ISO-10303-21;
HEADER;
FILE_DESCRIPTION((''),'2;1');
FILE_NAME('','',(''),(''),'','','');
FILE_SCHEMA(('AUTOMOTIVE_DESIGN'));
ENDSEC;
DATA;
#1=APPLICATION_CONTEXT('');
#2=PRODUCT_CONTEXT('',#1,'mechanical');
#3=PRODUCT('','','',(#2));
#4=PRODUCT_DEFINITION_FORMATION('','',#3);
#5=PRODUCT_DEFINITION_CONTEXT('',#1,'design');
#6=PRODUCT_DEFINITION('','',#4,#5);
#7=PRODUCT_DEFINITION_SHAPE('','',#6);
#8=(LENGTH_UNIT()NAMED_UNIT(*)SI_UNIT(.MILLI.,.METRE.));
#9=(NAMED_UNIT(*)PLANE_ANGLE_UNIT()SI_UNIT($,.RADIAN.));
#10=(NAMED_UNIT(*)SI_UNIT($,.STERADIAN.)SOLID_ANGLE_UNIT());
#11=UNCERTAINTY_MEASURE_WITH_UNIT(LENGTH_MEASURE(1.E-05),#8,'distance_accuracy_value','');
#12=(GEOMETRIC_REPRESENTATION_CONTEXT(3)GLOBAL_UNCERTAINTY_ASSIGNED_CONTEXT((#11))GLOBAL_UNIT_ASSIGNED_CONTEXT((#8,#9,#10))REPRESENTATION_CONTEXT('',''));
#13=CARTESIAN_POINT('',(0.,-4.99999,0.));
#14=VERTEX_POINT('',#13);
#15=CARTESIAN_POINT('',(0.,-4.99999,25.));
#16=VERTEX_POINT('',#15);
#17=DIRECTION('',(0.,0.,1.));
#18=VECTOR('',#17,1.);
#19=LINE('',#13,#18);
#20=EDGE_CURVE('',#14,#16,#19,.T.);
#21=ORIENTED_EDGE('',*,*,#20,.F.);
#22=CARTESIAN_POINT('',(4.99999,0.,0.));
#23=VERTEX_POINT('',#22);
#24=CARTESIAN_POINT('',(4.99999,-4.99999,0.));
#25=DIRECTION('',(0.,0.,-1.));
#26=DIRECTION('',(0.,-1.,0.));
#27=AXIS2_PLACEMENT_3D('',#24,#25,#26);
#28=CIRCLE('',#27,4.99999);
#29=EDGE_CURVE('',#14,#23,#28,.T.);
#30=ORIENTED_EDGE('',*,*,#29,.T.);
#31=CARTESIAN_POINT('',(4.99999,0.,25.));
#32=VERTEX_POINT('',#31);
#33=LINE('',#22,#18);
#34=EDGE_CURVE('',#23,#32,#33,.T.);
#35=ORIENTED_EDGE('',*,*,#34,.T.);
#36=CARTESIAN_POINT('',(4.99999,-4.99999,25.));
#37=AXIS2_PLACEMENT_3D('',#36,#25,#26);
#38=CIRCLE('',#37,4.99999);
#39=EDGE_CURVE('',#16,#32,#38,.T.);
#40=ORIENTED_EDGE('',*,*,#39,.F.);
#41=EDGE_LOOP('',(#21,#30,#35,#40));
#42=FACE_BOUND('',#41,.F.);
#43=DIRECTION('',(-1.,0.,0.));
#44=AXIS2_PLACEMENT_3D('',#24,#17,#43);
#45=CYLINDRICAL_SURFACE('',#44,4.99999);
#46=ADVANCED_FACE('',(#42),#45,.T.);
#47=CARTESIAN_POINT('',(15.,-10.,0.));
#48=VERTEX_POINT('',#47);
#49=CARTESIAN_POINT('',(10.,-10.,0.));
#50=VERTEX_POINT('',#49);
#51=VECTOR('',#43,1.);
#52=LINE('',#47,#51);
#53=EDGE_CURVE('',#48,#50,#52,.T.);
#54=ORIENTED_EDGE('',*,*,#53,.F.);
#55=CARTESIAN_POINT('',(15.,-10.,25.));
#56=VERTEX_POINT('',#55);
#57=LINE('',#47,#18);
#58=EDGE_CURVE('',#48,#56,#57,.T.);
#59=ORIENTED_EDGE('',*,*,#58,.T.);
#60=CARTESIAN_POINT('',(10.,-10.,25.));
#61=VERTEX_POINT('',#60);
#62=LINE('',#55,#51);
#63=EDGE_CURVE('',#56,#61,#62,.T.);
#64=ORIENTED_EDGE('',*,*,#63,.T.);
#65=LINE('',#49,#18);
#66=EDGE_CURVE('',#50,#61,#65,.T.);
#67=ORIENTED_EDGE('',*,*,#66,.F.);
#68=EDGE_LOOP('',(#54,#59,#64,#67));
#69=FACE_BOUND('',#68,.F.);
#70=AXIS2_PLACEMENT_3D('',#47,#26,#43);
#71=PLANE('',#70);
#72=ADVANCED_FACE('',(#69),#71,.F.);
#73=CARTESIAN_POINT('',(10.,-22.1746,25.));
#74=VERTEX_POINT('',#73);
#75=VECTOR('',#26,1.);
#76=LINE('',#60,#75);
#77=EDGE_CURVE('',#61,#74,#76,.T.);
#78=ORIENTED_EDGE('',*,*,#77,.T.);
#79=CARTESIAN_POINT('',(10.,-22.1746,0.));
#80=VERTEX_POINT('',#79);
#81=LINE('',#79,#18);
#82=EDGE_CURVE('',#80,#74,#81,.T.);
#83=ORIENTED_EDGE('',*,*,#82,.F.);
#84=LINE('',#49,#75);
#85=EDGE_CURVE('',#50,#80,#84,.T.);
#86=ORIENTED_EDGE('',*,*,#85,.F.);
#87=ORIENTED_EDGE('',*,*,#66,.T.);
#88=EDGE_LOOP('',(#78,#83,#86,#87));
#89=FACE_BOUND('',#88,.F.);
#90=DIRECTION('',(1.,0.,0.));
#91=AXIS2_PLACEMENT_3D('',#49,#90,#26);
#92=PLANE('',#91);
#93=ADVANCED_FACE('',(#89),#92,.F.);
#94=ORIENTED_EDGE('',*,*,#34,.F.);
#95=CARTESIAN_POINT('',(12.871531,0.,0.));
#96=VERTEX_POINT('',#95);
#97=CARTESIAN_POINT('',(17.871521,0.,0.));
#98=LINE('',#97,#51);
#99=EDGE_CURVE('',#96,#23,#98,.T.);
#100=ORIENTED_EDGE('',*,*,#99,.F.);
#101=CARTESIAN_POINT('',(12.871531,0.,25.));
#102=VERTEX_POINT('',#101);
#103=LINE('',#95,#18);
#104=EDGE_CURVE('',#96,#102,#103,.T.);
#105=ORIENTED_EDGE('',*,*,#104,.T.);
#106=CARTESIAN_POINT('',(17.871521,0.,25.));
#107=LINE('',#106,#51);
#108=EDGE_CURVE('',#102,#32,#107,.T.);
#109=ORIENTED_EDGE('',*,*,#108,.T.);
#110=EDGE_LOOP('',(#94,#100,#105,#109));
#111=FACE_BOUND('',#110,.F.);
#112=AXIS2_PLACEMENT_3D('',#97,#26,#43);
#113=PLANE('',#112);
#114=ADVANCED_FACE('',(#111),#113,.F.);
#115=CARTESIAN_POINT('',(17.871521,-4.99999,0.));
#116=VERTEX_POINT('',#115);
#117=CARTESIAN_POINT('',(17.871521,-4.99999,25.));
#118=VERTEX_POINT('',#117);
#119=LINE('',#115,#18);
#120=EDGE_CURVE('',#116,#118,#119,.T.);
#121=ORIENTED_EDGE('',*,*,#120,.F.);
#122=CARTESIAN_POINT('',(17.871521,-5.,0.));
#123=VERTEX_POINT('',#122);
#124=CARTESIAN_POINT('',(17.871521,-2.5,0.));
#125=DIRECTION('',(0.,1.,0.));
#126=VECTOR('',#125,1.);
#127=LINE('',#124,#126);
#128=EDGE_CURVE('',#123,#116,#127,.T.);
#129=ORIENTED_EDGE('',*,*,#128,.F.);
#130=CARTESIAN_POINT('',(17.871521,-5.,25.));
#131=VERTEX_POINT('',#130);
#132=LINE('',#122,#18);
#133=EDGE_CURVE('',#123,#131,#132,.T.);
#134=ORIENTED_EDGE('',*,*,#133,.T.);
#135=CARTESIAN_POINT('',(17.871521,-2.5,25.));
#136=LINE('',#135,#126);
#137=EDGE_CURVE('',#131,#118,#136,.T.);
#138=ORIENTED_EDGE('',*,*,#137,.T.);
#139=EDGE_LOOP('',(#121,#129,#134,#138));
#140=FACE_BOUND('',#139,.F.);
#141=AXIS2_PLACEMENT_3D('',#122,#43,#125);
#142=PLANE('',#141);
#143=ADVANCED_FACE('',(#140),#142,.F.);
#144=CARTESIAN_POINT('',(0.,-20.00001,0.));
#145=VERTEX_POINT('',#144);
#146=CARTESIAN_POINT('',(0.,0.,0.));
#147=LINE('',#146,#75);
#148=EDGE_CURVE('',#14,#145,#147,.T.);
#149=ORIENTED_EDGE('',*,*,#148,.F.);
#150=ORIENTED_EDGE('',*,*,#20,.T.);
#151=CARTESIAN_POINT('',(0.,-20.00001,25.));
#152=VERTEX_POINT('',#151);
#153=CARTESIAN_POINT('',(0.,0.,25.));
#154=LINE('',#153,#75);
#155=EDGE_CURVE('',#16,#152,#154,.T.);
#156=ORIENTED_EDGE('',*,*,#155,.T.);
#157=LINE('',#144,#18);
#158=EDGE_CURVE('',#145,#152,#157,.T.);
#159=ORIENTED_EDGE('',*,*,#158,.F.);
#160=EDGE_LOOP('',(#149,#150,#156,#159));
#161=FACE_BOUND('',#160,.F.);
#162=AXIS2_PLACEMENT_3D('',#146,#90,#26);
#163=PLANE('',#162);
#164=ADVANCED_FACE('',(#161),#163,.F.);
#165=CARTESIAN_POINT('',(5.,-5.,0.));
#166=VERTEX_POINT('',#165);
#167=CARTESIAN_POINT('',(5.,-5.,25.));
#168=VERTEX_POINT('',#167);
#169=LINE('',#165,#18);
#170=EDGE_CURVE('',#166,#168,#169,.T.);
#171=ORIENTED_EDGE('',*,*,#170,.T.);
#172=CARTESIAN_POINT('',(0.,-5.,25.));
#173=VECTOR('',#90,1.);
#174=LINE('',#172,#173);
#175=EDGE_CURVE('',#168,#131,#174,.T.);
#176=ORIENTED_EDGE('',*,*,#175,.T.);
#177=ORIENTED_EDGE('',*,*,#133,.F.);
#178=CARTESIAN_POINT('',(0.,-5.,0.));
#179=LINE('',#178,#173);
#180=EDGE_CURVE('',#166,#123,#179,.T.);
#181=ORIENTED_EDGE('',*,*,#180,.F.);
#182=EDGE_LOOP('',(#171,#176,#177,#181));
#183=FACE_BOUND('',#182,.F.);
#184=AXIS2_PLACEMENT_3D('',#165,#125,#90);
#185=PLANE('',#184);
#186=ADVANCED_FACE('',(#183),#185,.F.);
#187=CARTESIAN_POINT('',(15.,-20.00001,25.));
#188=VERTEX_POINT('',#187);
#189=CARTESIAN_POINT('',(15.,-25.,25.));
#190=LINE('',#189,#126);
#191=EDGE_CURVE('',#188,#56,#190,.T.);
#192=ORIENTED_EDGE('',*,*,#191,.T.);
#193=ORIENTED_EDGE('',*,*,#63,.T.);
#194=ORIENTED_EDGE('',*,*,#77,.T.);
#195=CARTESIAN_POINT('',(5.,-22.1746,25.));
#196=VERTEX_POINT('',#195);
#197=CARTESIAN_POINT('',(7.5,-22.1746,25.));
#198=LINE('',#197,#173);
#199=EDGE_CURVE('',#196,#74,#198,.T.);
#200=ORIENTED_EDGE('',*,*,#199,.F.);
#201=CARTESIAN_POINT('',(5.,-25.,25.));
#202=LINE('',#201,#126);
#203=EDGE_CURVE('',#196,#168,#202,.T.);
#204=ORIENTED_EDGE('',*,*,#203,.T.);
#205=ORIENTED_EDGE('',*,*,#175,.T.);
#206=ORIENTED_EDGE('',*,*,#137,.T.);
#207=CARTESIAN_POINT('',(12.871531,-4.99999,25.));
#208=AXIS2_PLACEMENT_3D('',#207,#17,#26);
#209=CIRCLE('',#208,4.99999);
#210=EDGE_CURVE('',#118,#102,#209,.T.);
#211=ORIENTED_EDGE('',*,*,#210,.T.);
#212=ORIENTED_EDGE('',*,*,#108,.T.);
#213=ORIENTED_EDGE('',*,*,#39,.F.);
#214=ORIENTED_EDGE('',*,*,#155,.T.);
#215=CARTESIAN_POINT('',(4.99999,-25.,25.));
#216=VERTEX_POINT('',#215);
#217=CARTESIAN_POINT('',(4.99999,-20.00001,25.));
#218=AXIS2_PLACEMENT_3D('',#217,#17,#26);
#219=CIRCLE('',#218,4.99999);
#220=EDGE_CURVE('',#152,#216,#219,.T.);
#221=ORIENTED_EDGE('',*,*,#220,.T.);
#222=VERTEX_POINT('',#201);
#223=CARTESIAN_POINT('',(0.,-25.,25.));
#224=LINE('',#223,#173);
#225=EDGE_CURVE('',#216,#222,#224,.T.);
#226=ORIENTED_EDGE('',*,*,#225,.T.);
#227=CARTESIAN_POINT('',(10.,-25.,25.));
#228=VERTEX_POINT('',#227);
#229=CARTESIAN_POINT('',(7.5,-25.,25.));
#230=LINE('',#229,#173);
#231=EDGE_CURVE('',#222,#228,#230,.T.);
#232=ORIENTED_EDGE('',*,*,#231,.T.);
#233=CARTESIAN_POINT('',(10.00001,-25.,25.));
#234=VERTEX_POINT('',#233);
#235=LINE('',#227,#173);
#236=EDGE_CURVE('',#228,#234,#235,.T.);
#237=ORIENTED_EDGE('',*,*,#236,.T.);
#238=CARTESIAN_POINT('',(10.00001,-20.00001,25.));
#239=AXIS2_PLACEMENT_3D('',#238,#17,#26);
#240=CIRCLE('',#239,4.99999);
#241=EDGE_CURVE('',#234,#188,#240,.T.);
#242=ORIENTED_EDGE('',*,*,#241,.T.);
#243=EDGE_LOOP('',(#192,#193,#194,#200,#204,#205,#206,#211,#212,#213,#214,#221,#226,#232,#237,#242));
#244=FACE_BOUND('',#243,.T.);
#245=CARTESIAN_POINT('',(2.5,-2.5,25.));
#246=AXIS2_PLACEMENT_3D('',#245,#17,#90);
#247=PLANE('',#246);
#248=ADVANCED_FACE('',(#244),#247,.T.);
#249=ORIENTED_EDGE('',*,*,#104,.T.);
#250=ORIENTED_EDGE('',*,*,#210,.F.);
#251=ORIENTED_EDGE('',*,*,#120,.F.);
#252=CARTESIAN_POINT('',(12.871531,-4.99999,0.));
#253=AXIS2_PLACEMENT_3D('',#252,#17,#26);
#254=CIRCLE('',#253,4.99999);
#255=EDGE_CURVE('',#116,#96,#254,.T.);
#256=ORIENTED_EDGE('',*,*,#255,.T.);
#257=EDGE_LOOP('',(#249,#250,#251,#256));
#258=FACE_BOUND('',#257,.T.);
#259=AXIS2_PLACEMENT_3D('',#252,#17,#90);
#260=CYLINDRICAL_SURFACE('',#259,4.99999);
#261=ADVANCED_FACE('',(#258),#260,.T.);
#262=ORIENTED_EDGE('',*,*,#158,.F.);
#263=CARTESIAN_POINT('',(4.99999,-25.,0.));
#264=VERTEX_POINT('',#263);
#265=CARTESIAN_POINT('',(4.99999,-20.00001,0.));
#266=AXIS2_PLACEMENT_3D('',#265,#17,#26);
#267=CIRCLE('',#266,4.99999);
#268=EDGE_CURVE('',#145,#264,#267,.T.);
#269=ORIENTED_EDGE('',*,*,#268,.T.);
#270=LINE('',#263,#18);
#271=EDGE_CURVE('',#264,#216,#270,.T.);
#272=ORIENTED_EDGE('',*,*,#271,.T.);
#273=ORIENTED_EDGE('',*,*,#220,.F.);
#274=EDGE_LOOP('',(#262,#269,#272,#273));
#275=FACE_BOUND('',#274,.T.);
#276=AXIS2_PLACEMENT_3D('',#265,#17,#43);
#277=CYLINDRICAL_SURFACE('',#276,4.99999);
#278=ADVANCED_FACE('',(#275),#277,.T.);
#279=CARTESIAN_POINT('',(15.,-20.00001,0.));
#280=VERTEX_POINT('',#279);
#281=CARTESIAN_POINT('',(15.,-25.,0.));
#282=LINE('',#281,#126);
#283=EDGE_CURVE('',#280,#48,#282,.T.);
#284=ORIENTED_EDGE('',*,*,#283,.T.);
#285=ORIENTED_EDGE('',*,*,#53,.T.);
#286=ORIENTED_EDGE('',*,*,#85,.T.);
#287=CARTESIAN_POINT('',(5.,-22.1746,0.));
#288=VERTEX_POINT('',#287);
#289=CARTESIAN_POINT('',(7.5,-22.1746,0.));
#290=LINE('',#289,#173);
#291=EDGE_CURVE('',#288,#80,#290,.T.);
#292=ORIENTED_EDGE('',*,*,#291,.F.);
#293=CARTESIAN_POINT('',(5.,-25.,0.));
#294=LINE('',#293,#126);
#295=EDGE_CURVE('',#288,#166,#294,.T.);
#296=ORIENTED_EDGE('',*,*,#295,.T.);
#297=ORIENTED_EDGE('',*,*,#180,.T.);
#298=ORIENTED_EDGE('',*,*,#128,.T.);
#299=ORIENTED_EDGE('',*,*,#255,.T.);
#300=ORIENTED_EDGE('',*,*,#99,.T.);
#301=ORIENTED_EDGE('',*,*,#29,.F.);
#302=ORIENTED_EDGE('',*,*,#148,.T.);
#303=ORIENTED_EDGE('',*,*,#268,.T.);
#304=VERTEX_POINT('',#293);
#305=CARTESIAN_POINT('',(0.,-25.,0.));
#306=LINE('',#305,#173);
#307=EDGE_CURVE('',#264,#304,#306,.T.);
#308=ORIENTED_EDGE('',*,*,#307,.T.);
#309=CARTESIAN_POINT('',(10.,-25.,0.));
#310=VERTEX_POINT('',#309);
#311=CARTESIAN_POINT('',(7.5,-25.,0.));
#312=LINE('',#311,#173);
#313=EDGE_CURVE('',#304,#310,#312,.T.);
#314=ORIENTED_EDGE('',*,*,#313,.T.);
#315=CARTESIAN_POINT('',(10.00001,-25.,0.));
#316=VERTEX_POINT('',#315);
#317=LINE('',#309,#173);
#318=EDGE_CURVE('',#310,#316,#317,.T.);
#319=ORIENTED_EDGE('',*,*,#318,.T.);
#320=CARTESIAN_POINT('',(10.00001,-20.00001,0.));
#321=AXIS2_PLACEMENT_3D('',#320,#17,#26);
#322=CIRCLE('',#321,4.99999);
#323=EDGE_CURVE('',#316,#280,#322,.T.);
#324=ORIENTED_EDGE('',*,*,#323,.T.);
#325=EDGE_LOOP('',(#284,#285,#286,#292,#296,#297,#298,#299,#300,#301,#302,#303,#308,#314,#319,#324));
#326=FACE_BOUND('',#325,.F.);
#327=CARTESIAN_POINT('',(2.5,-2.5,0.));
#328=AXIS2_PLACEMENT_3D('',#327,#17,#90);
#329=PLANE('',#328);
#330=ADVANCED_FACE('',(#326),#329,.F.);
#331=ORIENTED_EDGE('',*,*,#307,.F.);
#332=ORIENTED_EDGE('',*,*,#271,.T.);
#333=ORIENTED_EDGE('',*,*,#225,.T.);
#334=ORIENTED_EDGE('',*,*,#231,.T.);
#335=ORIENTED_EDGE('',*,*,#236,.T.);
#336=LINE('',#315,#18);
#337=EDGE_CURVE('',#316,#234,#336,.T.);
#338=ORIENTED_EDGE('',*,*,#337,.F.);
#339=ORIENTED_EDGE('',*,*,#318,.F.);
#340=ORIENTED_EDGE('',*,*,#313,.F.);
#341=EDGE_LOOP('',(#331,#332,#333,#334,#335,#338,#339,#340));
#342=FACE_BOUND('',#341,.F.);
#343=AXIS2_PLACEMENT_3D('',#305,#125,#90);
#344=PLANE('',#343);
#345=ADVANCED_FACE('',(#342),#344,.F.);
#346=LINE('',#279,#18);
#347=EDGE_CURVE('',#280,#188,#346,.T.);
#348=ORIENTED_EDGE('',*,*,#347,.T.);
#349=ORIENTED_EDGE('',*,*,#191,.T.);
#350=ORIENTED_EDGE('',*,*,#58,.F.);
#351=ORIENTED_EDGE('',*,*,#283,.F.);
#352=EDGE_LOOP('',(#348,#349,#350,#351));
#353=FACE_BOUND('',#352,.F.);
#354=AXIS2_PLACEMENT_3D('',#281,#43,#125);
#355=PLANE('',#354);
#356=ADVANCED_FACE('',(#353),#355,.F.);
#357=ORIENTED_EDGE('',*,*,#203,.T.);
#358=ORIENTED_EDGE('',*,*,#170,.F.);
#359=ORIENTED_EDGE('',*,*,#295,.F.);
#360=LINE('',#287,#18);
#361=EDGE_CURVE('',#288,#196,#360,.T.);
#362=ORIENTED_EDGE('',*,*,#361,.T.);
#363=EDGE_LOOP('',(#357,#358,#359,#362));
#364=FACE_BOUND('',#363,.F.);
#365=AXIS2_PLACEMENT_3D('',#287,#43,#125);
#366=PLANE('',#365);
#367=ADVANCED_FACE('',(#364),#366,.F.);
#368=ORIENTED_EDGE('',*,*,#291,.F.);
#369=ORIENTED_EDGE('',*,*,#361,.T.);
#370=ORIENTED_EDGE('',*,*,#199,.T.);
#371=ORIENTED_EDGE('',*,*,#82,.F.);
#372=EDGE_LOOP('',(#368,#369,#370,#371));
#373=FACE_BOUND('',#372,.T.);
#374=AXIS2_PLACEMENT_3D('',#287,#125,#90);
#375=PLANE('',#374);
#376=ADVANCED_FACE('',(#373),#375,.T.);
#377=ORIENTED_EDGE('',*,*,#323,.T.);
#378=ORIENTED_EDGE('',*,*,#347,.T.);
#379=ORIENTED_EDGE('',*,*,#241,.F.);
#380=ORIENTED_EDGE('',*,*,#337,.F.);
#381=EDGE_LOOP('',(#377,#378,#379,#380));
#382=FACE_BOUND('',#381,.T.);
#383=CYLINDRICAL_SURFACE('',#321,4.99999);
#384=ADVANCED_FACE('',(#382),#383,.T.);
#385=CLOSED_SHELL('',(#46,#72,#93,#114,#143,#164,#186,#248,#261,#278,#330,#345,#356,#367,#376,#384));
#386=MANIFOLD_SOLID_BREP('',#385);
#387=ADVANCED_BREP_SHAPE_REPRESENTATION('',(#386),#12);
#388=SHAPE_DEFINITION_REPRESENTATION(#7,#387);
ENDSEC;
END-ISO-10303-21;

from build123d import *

# Parameters (mm, degrees)
F0_W     = 5
F0_H     = 5
F0_W_2   = 12.8715214133
F0_H_2   = 2.8254000843
F1_DEPTH = 25
F2_R     = 4.99999


# Not quite as in the source:
# - a fillet or chamfer is up to 0.001 mm smaller than in the source, because OpenCascade refuses the exact size


with BuildPart() as f1:
    # F0 (on Top) → F1 (new body)
    with BuildSketch(Plane.XY):
        with Locations((2.5, -2.5)):
            Rectangle(F0_W, F0_H)
        with Locations((11.4357607067, -2.5)):
            Rectangle(F0_W_2, F0_H)
        Polygon((5, -5), (0, -5), (0, -25), (5, -25), (5, -22.1745999157), align=None)
        with Locations((7.5, -23.5872999579)):
            Rectangle(F0_W, F0_H_2)
        Polygon((10, -10), (10, -22.1745999157), (10, -25), (15, -25), (15, -10), align=None)
    extrude(amount=F1_DEPTH)

    # F2 (radius 5 in the source; OpenCascade refuses exactly that, so slightly less here)
    f2_edges = [f1.edges().sort_by_distance(p)[0] for p in [
        (0, 0, 12.5),
        (0, -25, 12.5),
        (15, -25, 12.5),
        (17.871521, 0, 12.5),
    ]]
    fillet(f2_edges, radius=F2_R)


solid = f1.part
